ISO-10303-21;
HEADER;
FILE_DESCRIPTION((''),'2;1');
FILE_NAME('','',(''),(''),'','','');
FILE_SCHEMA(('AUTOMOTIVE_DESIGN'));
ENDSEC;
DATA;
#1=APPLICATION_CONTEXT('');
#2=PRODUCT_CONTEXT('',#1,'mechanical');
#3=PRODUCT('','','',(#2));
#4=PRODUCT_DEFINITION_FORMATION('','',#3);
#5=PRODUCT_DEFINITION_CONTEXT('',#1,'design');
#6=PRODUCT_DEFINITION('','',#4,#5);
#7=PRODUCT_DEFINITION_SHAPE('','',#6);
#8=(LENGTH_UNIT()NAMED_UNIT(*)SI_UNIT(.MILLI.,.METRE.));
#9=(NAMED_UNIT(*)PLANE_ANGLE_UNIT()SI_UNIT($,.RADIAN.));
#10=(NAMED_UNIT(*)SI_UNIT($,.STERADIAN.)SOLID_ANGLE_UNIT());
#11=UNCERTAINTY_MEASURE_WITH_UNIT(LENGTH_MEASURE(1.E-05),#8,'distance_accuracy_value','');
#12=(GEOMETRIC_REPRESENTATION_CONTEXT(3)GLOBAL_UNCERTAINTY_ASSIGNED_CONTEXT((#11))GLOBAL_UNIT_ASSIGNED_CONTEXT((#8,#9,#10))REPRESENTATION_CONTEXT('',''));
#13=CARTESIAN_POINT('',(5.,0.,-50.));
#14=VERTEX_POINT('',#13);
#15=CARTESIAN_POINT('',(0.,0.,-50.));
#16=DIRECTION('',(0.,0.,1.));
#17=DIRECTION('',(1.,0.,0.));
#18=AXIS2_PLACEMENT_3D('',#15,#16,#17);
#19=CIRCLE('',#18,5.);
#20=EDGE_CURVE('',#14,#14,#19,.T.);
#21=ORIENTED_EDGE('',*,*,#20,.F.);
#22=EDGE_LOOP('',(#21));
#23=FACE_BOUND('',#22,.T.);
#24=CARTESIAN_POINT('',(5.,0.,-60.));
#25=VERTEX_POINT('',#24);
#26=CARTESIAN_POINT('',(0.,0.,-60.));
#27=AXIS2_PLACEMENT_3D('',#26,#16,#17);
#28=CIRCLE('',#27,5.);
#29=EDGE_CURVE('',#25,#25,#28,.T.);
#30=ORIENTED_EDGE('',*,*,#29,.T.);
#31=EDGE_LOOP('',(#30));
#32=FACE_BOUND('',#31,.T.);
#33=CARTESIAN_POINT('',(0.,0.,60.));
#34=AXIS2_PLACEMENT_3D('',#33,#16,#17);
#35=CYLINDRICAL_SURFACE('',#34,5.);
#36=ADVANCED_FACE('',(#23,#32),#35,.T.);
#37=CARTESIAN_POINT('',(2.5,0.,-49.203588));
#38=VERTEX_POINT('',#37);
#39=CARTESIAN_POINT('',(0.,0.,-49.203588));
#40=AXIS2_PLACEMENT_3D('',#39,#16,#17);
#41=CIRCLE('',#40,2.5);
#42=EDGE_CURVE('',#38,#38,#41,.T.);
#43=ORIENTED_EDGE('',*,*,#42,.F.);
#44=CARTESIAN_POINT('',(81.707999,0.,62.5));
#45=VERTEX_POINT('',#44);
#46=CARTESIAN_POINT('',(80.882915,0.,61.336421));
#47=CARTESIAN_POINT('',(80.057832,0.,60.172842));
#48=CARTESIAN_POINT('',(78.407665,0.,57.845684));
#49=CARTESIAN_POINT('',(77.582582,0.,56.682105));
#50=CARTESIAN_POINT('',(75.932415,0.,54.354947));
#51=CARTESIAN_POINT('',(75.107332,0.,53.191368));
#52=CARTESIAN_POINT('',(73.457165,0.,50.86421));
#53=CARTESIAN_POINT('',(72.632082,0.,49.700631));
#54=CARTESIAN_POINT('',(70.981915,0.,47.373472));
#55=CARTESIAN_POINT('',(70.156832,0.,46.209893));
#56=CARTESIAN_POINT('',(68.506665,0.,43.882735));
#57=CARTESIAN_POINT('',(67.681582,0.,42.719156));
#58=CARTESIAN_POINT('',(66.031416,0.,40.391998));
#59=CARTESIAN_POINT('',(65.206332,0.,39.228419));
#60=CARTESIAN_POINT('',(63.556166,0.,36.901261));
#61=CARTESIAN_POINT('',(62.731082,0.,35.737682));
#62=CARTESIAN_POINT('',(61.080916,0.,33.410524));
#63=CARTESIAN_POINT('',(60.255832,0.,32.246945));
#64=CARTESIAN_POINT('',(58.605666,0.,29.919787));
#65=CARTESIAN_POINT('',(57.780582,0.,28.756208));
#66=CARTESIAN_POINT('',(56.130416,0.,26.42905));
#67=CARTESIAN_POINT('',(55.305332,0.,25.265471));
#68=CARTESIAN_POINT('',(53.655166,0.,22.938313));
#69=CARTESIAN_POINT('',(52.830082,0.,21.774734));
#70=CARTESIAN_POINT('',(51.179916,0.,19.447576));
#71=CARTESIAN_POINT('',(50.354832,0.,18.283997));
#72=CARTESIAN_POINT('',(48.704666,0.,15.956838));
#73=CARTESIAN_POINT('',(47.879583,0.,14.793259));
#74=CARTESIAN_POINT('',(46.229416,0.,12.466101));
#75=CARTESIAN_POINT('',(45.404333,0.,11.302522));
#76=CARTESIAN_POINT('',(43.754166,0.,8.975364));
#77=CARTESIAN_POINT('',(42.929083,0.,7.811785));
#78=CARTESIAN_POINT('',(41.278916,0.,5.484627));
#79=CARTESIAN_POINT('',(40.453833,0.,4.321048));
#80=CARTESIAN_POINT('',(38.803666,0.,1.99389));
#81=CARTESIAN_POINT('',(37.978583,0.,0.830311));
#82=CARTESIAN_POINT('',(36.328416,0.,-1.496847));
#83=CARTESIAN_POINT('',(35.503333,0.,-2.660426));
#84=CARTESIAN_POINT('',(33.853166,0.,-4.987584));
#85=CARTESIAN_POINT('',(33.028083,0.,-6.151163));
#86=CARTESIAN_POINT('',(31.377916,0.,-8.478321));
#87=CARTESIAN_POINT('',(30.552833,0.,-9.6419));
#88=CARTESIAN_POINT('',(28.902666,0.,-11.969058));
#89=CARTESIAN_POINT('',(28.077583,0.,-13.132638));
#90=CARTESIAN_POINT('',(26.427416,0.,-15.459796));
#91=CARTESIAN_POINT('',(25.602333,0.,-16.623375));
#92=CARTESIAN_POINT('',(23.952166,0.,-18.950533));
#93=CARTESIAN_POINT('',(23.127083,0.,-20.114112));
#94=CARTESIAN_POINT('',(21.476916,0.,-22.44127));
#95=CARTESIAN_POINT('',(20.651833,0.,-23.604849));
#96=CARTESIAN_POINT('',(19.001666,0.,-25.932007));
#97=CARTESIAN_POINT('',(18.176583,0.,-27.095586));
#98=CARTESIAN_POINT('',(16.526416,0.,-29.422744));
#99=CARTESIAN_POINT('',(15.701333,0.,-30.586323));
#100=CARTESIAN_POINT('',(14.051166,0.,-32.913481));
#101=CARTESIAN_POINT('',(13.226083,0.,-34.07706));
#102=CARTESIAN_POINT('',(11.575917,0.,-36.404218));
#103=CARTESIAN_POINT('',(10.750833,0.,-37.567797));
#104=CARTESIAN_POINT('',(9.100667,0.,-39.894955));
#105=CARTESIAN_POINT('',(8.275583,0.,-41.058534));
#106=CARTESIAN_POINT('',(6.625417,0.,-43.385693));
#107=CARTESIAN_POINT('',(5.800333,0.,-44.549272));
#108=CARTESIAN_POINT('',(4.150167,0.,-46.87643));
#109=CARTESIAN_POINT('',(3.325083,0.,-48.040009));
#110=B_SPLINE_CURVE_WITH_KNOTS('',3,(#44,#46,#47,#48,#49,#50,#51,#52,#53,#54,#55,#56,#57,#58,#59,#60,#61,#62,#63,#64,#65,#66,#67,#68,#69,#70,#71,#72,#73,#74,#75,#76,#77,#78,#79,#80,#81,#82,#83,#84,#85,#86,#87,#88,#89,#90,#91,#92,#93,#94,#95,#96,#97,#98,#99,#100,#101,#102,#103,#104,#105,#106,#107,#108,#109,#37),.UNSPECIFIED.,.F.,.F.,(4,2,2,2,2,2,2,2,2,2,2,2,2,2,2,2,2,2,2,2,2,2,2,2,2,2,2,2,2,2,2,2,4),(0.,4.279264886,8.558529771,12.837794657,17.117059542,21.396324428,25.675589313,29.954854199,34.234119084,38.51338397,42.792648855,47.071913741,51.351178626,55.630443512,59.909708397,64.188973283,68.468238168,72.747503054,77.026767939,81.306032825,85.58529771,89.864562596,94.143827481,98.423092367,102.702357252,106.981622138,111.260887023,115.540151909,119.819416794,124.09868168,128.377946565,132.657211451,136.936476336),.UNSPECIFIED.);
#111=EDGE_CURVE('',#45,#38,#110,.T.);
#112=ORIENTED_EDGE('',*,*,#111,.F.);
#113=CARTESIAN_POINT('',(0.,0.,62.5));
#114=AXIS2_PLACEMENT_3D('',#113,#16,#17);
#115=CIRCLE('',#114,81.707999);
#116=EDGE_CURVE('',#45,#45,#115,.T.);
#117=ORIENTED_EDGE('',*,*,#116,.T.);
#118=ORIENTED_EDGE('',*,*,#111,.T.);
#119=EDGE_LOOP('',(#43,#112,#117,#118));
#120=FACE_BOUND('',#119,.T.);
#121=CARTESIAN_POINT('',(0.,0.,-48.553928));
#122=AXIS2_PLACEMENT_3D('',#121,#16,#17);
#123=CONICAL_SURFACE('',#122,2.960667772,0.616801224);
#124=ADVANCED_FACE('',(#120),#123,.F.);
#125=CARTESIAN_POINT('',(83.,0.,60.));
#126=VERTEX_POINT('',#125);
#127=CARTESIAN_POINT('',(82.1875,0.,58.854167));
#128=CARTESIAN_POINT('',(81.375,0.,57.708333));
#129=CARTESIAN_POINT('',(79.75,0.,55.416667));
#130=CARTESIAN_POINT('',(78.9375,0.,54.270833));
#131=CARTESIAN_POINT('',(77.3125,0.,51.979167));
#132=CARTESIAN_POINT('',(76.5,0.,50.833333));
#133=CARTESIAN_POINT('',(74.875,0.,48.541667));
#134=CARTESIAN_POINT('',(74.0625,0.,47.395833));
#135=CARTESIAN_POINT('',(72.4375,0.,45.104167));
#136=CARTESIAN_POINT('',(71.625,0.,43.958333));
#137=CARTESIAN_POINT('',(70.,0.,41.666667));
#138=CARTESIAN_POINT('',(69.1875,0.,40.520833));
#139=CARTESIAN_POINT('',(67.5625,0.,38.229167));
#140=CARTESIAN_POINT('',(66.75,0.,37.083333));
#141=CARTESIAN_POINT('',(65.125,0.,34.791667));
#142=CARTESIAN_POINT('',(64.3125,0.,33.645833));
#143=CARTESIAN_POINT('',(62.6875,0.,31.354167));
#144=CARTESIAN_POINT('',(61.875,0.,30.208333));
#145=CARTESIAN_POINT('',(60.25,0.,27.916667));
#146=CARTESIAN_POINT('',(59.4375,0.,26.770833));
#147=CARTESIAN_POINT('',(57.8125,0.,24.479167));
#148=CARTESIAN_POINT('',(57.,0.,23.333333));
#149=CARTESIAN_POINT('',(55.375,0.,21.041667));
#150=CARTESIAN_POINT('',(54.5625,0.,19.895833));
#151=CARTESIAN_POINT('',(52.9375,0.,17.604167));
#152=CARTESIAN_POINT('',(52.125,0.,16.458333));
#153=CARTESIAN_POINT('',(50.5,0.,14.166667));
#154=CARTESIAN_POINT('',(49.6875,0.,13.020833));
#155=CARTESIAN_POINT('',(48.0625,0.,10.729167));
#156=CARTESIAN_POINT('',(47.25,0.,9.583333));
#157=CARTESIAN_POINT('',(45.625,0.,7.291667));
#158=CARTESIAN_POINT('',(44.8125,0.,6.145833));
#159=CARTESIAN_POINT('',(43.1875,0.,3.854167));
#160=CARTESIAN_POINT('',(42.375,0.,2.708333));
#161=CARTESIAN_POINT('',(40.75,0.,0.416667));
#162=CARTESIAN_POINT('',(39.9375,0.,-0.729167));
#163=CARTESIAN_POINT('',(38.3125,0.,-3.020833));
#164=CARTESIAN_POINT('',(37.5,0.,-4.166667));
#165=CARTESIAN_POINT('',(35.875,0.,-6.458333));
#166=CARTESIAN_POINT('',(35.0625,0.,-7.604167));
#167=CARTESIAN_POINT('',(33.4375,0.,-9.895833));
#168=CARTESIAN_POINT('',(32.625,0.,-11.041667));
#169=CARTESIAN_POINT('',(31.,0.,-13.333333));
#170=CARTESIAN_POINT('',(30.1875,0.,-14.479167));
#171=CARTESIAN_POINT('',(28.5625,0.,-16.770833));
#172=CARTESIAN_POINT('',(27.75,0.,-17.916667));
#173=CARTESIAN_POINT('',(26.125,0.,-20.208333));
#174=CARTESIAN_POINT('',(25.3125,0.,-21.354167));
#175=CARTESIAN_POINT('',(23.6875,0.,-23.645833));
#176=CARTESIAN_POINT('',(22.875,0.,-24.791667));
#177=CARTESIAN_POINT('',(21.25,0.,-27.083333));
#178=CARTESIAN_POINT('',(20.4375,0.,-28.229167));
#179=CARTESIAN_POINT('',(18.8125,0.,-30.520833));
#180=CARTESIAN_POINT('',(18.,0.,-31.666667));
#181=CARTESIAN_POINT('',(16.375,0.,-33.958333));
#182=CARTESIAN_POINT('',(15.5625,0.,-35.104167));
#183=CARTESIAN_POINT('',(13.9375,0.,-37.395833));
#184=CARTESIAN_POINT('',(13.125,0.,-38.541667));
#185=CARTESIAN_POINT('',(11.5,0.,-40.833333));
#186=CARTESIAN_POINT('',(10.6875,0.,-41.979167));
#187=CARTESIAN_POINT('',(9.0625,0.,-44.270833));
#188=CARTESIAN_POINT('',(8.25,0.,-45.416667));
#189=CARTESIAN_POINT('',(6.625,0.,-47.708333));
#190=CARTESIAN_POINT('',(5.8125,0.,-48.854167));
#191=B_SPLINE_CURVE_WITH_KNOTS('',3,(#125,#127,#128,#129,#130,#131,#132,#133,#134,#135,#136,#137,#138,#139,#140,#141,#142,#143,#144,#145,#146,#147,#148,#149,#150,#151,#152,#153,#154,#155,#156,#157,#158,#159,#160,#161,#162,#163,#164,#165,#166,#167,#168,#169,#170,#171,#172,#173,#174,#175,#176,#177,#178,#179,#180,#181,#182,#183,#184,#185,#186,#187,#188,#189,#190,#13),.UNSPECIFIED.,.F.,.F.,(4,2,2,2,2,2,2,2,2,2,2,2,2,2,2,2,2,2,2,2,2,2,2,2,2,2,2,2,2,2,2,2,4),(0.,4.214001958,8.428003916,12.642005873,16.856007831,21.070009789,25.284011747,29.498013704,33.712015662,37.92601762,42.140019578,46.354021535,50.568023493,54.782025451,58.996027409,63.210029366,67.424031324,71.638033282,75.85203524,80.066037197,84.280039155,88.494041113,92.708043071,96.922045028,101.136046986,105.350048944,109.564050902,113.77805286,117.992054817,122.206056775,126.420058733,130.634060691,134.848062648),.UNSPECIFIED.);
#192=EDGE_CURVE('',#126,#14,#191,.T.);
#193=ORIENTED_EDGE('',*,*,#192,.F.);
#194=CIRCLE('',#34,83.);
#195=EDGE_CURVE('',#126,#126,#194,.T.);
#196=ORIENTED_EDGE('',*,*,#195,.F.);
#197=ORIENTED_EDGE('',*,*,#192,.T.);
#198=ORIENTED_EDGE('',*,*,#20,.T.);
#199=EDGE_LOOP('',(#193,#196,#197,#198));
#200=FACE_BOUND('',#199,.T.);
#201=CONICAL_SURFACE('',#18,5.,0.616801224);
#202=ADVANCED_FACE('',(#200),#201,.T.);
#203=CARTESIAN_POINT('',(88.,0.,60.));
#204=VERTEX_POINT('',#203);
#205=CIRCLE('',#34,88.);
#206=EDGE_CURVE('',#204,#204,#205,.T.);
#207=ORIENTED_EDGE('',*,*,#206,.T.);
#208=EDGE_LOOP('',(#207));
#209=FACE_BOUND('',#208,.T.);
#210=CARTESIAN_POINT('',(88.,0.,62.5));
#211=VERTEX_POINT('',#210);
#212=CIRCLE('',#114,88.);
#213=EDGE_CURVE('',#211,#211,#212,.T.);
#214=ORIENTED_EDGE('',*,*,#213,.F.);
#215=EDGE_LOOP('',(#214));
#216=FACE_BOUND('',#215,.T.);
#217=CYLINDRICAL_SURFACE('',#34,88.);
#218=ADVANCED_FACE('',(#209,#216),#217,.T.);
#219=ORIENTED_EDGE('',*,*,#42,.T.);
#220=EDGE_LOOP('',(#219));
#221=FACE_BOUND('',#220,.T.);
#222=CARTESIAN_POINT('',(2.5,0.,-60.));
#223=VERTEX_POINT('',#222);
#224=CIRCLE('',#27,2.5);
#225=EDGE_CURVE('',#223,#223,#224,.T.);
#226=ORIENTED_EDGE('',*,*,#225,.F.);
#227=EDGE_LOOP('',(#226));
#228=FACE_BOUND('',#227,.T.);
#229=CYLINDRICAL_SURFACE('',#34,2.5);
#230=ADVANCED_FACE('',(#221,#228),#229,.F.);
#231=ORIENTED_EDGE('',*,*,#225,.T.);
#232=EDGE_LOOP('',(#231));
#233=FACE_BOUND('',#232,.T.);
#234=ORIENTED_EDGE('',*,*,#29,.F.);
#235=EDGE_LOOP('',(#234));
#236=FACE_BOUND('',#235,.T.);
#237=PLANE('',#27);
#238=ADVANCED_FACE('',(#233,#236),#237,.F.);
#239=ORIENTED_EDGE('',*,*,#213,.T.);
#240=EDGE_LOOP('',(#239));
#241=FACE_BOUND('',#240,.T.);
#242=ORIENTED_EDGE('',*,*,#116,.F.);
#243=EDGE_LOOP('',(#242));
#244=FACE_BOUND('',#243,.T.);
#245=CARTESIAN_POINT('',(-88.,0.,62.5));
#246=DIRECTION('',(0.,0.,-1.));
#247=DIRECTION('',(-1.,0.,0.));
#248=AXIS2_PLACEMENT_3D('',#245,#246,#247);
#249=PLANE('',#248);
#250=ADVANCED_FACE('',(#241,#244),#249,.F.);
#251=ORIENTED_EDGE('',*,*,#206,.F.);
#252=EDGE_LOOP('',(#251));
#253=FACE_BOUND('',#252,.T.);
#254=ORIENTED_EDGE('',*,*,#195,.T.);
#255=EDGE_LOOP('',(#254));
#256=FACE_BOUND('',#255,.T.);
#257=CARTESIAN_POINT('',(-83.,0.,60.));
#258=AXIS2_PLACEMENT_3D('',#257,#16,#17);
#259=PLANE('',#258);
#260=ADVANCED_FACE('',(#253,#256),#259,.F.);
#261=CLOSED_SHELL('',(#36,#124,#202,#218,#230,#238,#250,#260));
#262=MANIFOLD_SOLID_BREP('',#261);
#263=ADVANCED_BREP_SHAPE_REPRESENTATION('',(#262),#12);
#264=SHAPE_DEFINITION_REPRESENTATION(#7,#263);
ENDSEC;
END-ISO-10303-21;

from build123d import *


# Read off the part's stored shape, not the designer's step: Vaciado1
with BuildPart() as part:
    # Croquis1 → Revolución2 (revolve)
    with BuildSketch(Plane(origin=(0, 0, 0), x_dir=(1, 0, 0), z_dir=(0, 1, 0)), mode=Mode.PRIVATE) as revoluci_n2_sk:
        Polygon((0, -60), (0, 60), (-5, 60), (-5, 50), (-83, -60), (-88, -60), (-88, -62.5), (0, -62.5), align=None)
    revolve(revoluci_n2_sk.sketch.rotate(Axis((0, 0, 60), (0, 0, -1)), 180), axis=Axis((0, 0, 60), (0, 0, -1)))

    # Vaciado1 outline → Vaciado1 (revolve, cut)
    with BuildSketch(Plane.XZ):
        Polygon((0, -60), (2.5, -60), (2.5, -49.203587736), (81.707998576, 62.5), (0, 62.5), align=None)
    revolve(axis=Axis((0, 0, 0), (0, 0, 1)), mode=Mode.SUBTRACT)


solid = part.part
